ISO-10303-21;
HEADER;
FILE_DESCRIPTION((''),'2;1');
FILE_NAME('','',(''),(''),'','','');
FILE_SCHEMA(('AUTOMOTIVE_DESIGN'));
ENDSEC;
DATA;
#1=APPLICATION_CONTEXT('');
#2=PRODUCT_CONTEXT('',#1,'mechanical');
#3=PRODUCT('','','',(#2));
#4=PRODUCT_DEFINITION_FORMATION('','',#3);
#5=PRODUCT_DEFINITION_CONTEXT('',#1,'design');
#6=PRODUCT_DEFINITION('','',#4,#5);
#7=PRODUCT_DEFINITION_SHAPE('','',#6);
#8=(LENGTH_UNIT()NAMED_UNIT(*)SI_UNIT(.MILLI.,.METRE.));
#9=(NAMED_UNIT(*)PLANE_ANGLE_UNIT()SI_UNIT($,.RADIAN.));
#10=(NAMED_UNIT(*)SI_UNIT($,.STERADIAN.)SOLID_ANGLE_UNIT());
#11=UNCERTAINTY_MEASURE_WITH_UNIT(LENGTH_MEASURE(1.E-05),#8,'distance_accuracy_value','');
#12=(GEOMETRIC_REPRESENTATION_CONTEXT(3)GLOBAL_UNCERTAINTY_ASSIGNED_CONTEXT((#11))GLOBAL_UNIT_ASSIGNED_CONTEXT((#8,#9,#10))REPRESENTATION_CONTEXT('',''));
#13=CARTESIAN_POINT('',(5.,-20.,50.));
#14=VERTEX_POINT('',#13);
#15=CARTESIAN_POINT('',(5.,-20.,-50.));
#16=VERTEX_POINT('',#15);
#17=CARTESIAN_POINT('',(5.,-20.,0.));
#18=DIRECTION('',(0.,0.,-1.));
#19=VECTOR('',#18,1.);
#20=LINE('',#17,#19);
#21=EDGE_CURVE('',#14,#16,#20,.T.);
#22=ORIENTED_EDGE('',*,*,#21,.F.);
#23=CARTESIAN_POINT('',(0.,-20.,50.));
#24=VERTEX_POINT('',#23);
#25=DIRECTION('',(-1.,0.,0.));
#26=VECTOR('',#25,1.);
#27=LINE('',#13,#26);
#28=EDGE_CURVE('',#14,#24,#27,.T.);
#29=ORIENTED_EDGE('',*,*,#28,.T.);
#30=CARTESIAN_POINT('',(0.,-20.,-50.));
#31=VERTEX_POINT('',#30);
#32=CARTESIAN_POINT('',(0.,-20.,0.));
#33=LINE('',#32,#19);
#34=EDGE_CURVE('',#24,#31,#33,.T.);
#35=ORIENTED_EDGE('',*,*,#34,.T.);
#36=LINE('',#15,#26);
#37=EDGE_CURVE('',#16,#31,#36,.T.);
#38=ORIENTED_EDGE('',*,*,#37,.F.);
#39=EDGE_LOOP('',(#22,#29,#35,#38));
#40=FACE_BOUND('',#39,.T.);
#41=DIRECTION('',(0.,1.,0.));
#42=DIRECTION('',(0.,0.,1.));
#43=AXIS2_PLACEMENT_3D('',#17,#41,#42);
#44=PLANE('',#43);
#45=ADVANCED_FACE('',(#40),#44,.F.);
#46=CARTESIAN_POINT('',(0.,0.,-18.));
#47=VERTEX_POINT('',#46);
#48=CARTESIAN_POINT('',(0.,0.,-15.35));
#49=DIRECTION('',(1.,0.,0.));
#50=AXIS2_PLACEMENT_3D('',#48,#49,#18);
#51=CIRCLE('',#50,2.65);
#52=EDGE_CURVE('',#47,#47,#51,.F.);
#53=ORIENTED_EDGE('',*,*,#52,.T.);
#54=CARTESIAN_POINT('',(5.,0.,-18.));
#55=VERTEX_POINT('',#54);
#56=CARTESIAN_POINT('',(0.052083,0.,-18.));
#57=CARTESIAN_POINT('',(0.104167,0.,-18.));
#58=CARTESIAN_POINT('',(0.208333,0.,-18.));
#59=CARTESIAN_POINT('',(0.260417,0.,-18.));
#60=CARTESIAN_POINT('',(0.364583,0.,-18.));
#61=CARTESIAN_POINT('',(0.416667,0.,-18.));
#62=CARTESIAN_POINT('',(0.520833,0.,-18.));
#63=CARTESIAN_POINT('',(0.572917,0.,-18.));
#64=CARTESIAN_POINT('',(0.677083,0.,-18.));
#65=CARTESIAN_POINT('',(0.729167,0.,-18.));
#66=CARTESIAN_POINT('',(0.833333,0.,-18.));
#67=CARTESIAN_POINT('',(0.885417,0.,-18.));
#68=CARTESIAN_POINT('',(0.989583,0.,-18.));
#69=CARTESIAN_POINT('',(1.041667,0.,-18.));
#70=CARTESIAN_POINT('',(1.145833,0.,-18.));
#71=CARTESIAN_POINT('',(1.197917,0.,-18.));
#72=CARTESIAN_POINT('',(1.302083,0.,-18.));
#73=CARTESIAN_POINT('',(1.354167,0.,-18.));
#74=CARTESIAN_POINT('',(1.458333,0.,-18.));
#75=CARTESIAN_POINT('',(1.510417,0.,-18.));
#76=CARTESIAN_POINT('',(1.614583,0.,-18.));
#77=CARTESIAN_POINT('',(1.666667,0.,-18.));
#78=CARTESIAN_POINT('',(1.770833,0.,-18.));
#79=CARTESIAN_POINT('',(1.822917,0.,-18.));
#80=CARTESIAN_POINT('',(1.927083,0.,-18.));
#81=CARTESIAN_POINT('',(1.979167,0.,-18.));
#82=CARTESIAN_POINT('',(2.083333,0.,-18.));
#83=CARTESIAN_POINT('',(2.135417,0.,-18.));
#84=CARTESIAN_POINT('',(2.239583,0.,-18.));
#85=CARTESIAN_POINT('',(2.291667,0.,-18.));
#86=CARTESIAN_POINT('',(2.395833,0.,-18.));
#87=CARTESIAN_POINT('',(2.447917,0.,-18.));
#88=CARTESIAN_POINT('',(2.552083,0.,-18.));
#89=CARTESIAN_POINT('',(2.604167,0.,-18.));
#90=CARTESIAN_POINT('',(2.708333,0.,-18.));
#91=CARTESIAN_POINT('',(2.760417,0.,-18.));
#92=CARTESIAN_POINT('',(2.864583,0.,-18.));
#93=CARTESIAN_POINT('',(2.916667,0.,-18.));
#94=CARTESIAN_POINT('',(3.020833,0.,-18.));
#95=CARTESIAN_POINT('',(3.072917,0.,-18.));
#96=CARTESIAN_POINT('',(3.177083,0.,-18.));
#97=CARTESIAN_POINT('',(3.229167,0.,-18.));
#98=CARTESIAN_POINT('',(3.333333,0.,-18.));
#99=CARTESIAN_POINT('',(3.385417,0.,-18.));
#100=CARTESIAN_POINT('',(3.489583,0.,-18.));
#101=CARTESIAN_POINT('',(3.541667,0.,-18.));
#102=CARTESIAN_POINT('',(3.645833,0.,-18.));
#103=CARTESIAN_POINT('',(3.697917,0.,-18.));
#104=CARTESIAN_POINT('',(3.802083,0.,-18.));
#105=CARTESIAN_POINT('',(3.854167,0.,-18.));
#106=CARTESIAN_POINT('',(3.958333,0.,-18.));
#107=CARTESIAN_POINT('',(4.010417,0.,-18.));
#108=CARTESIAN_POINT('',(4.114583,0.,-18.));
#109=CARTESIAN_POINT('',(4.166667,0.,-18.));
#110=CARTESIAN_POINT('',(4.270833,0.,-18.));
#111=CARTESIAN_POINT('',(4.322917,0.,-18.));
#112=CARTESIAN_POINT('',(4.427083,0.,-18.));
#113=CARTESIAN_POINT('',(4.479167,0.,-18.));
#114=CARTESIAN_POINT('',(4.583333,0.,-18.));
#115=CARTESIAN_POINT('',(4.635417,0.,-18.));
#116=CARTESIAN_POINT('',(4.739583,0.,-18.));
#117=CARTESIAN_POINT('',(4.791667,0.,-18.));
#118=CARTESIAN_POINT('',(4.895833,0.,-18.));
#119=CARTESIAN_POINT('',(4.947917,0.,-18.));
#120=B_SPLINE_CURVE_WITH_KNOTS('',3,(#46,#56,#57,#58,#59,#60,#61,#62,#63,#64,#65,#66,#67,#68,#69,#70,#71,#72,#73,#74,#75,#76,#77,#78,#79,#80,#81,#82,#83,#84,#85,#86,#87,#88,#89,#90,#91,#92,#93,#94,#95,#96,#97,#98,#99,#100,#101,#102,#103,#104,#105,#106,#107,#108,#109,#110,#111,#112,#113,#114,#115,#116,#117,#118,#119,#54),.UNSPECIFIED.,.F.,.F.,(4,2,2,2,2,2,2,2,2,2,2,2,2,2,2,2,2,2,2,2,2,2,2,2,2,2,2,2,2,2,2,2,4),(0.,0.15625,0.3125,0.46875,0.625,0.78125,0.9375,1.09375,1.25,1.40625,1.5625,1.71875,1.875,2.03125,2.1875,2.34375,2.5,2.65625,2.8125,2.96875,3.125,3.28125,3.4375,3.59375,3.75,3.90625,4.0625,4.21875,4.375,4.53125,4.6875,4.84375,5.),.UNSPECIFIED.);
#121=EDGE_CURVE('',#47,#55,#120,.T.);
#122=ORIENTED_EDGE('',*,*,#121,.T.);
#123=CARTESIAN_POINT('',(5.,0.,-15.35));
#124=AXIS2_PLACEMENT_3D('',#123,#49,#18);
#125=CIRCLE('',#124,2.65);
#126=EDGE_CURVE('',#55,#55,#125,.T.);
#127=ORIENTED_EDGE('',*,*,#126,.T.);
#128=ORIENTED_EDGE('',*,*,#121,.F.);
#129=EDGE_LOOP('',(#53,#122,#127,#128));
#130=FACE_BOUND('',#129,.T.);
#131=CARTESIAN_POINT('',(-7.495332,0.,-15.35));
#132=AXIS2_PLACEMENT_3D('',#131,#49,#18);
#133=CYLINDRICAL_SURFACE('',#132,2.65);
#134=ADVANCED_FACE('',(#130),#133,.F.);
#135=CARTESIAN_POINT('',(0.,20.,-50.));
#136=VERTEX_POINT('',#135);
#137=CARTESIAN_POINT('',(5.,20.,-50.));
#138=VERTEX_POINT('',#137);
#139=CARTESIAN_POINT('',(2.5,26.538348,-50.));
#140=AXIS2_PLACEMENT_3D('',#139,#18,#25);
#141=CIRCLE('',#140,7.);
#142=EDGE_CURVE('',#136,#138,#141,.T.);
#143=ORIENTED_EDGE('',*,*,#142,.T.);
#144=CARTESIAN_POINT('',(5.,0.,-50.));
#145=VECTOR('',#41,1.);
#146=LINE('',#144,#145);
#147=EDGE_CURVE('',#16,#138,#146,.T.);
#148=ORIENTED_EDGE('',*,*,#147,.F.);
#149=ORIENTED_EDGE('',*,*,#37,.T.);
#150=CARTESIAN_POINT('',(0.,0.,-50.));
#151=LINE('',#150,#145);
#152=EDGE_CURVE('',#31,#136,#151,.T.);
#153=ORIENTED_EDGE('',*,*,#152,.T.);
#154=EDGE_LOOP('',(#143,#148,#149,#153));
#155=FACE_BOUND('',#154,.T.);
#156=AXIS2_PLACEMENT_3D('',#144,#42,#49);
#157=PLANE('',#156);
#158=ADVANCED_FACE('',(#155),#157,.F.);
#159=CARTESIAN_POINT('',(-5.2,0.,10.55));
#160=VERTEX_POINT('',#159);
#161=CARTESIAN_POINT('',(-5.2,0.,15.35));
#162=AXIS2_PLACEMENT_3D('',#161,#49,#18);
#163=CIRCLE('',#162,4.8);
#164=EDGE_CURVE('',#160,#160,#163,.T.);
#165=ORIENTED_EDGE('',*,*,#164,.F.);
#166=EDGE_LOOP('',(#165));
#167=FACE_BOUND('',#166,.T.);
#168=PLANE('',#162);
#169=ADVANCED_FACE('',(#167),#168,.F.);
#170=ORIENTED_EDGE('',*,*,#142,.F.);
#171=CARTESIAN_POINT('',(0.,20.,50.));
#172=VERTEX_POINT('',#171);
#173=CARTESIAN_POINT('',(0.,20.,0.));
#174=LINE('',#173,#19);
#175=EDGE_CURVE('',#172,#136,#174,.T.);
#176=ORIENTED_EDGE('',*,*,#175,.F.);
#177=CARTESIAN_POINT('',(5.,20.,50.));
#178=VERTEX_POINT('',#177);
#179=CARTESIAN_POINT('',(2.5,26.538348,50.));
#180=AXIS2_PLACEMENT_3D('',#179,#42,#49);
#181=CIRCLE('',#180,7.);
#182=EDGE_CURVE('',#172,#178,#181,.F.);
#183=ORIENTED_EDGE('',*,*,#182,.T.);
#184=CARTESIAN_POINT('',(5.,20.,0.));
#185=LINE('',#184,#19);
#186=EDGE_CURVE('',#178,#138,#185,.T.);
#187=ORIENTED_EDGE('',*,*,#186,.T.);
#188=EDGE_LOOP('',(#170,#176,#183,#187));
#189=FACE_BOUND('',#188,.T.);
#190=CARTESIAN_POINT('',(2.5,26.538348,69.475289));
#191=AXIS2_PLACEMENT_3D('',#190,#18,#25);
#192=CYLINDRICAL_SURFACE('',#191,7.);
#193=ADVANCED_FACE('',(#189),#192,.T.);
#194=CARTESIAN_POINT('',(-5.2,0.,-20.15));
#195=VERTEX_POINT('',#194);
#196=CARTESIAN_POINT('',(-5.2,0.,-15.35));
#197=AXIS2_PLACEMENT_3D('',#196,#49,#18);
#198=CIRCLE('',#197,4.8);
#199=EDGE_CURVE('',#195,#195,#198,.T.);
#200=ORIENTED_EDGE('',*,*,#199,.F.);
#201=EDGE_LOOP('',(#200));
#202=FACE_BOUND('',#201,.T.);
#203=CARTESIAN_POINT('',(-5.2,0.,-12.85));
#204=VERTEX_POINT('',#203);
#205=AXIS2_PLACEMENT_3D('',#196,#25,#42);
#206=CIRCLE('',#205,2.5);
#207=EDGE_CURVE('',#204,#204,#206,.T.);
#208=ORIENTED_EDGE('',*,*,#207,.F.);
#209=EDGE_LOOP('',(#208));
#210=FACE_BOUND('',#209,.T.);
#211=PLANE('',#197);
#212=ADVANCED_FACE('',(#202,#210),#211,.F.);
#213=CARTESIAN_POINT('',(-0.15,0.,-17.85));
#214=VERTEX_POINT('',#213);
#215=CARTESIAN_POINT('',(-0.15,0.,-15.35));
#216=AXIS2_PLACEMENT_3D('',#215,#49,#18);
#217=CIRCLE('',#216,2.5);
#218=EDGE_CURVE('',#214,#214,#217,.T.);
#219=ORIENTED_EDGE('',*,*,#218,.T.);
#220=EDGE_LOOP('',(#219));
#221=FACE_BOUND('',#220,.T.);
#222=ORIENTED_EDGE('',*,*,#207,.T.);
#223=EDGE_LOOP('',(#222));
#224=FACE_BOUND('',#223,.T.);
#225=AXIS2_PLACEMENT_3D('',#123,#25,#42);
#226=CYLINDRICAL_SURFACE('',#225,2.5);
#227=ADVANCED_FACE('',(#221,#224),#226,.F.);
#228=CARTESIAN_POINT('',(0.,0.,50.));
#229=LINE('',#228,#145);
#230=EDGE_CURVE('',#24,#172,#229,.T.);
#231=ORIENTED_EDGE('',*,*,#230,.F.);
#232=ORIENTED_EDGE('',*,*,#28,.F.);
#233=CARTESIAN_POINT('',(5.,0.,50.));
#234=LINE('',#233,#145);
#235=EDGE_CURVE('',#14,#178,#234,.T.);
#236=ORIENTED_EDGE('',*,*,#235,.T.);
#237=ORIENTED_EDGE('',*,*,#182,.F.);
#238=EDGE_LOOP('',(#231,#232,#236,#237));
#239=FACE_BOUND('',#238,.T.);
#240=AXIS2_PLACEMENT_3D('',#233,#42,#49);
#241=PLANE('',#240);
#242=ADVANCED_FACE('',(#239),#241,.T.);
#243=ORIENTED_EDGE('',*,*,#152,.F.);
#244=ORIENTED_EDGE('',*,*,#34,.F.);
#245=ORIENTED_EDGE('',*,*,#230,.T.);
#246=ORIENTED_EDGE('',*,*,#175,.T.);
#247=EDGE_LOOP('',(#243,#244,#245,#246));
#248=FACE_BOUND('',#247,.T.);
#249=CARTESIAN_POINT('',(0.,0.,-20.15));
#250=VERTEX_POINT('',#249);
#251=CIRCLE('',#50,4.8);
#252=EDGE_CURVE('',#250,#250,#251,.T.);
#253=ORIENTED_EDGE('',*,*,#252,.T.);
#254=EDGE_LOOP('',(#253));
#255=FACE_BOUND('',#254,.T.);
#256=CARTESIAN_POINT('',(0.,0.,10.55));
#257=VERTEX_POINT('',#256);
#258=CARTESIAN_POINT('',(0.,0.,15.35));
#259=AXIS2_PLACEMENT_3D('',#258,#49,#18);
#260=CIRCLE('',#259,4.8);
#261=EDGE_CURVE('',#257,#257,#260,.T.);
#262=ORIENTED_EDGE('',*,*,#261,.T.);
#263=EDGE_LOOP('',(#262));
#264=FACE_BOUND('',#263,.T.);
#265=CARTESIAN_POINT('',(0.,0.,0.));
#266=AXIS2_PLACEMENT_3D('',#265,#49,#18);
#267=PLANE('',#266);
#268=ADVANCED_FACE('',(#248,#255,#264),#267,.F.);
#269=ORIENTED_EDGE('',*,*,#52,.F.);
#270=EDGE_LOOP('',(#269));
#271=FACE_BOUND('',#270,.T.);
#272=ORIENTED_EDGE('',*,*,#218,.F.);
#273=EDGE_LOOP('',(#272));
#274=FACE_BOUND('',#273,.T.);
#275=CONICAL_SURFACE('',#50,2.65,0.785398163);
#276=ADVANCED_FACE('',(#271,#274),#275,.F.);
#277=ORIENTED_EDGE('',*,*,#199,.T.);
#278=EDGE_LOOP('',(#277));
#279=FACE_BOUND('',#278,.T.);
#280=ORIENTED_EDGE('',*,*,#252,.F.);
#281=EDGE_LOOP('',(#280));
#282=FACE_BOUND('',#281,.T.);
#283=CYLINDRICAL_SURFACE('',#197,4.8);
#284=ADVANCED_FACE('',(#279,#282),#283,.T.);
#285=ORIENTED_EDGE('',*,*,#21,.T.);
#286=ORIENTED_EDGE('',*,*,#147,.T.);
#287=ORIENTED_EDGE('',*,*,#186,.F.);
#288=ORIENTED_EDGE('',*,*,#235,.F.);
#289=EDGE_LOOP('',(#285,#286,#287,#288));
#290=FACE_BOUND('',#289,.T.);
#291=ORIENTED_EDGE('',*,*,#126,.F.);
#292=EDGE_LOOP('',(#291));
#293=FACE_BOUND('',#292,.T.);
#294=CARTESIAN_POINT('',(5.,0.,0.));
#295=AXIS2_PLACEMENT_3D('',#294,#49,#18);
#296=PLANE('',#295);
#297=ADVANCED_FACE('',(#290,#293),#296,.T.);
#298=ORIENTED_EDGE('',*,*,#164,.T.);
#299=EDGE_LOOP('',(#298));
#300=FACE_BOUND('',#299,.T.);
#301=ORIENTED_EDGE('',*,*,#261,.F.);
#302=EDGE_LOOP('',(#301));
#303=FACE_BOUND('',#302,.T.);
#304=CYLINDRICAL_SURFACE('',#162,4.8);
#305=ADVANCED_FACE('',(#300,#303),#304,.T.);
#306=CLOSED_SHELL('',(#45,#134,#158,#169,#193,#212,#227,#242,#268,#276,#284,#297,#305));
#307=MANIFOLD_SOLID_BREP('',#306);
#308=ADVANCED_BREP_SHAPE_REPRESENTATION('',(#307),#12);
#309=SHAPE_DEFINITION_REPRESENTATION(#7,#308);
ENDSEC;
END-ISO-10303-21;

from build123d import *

# Parameters (mm, degrees)
SKETCH1_W           = 40
SKETCH1_H           = 100
SKETCH1_R           = 4.8
BOSS_EXTRUDE1_DEPTH = 5
SKETCH1_3_R         = 4.8
BOSS_EXTRUDE2_DEPTH = 5.2
SKETCH2_R           = 2.5
CUT_EXTRUDE1_DEPTH  = 55.809123328
SKETCH3_R           = 2.65
CUT_EXTRUDE2_DEPTH  = 5
CHAMFER1_SIZE       = 0.15
BOSS_EXTRUDE3_DEPTH = 100


with BuildPart() as part:
    # Sketch1 → Boss-Extrude1 (new body)
    # profile 1 of 3: a face of its own
    with BuildSketch(Plane.YZ):
        Rectangle(SKETCH1_W, SKETCH1_H)
        with Locations((0, -15.35)):
            Circle(SKETCH1_R, mode=Mode.SUBTRACT)
        with Locations((0, 15.35)):
            Circle(SKETCH1_R, mode=Mode.SUBTRACT)
    # profile 2 of 3: a face of its own
    with BuildSketch(Plane.YZ):
        with Locations((0, -15.35)):
            Circle(SKETCH1_R)
    # profile 3 of 3: a face of its own
    with BuildSketch(Plane.YZ):
        with Locations((0, 15.35)):
            Circle(SKETCH1_R)
    extrude(amount=BOSS_EXTRUDE1_DEPTH)

    # Sketch1<3> → Boss-Extrude2 (add)
    with BuildSketch(Plane.YZ):
        with Locations(Location((0, 15.35, 0), (0, 0, 270))):
            Circle(SKETCH1_3_R)
        with Locations(Location((0, -15.35, 0), (0, 0, 270))):
            Circle(SKETCH1_3_R)
    extrude(amount=-BOSS_EXTRUDE2_DEPTH)

    # Sketch2 → Cut-Extrude1 (cut, through all)
    with BuildSketch(Plane(origin=(-5.2, 0, 0), x_dir=(0, -1, 0), z_dir=(-1, 0, 0))):
        with Locations(Location((0, -15.35, 0), (0, 0, 90))):
            Circle(SKETCH2_R)
    extrude(amount=-CUT_EXTRUDE1_DEPTH, mode=Mode.SUBTRACT)

    # Sketch3 → Cut-Extrude2 (cut)
    with BuildSketch(Plane(origin=(5, 0, 0), x_dir=(0, 0, -1), z_dir=(1, 0, 0))):
        with Locations((15.35, 0)):
            Circle(SKETCH3_R)
    extrude(amount=-CUT_EXTRUDE2_DEPTH, mode=Mode.SUBTRACT)

    # Chamfer1
    chamfer1_edges = [part.edges().sort_by_distance(p)[0] for p in [
        (0, 0, -17.85),
    ]]
    chamfer(chamfer1_edges, length=CHAMFER1_SIZE - 0.0001)  # a hair under: the kernel refuses the full size

    # Sketch4 → Boss-Extrude3 (add)
    with BuildSketch(Plane(origin=(0, 0, -50), x_dir=(1, 0, 0), z_dir=(0, 0, -1))):
        with BuildLine():
            Line((5, -20), (0, -20))
            ThreePointArc((0, -20), (2.5, -33.538348415), (5, -20))
        make_face()
    extrude(amount=-BOSS_EXTRUDE3_DEPTH)


solid = part.part
